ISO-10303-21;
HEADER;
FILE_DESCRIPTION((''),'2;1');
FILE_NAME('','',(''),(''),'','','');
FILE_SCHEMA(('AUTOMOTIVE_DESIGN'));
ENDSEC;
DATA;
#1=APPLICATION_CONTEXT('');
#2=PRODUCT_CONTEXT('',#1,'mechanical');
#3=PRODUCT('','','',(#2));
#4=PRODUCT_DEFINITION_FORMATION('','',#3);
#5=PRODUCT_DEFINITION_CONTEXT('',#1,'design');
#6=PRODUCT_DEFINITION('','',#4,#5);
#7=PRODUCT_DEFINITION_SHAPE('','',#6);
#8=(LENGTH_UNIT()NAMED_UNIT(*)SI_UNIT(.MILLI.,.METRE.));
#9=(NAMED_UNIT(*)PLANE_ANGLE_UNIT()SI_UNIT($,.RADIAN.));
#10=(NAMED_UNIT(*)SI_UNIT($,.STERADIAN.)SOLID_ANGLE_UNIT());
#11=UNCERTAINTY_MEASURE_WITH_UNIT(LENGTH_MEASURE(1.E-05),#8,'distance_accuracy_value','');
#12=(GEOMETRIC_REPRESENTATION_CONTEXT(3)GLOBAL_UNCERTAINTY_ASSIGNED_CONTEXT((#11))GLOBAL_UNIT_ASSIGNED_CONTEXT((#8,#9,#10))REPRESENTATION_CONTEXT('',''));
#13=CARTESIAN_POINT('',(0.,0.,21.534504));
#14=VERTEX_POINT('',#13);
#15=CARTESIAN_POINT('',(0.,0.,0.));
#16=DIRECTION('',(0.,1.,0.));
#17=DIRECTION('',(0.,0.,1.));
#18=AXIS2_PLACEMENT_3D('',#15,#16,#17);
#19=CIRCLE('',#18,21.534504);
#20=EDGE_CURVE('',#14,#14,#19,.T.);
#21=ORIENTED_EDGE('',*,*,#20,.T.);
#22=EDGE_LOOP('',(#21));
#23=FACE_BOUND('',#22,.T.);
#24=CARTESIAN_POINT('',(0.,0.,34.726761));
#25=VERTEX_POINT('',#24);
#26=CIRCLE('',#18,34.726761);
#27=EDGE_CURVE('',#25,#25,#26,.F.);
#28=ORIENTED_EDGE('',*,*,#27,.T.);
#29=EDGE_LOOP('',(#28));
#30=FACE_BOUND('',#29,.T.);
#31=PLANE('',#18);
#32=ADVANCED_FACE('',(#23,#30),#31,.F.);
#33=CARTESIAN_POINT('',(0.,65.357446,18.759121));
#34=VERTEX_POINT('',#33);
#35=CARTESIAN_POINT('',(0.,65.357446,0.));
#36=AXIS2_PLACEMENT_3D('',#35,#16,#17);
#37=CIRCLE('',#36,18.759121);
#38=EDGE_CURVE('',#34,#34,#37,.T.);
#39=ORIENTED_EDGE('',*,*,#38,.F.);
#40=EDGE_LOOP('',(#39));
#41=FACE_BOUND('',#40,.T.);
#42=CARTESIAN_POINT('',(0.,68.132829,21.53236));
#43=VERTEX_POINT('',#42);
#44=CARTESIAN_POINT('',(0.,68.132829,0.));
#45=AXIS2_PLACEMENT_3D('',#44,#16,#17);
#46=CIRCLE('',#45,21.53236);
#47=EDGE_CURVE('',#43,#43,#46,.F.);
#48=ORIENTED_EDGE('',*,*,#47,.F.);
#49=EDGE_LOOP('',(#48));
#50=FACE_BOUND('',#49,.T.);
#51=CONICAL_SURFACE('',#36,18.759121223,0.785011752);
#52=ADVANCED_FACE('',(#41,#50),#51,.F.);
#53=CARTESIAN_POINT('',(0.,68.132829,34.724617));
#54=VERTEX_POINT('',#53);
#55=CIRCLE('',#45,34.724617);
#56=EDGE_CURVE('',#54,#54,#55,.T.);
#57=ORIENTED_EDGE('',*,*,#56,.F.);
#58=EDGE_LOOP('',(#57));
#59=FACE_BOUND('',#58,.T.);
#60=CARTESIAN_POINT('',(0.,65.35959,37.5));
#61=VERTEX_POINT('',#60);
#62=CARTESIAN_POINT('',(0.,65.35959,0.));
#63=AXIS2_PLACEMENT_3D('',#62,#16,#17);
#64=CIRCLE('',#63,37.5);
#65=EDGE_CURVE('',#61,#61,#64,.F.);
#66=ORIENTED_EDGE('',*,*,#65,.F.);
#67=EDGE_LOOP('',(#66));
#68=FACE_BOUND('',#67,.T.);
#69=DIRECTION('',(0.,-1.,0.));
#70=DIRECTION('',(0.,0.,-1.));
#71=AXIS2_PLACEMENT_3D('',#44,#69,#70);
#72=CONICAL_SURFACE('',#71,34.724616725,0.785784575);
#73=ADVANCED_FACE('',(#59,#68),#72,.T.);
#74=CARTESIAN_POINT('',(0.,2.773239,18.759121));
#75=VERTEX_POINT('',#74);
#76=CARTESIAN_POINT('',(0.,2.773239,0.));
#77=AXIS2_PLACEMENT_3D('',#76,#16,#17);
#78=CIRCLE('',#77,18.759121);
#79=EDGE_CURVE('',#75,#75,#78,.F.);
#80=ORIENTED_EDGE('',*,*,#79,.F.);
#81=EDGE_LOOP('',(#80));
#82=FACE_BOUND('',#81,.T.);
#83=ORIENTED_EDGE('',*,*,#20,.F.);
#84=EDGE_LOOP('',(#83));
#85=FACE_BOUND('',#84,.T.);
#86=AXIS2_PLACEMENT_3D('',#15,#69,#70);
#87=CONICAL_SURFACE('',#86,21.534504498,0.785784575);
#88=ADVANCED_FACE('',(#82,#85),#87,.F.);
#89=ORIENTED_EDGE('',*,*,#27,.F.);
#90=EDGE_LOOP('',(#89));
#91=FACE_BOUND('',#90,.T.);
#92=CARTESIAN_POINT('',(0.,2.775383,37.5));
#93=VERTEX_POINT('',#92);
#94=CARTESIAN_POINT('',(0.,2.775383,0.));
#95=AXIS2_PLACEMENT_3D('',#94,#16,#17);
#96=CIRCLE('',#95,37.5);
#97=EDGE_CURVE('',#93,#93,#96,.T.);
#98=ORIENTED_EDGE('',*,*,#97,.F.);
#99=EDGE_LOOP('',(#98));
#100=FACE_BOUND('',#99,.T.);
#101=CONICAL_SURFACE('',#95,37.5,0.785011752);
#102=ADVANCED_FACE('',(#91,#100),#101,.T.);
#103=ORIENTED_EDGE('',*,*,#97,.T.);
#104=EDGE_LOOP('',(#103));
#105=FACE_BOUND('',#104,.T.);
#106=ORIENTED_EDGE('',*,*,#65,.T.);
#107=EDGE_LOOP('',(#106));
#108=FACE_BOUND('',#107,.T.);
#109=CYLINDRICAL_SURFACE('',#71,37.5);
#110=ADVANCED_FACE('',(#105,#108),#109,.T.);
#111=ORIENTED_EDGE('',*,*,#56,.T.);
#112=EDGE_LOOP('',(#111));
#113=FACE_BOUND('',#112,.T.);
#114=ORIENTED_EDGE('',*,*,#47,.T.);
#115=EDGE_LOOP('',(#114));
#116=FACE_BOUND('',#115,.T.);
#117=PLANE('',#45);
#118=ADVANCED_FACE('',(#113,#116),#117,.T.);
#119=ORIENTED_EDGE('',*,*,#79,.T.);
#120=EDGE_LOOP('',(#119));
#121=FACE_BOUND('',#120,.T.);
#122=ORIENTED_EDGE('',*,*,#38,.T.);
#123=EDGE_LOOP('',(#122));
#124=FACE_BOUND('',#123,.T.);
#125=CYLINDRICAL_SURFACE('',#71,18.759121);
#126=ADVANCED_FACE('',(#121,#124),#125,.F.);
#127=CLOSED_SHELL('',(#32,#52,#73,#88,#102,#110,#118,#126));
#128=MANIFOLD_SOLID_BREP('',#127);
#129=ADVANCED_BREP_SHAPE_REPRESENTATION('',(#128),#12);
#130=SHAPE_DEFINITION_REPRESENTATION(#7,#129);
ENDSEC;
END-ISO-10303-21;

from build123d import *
from OCP.BRepFilletAPI import BRepFilletAPI_MakeChamfer

# Parameters (mm, degrees)
SKETCH1_R           = 37.5
BOSS_EXTRUDE1_DEPTH = 68.132829337
SKETCH2_R           = 18.759121223
CUT_EXTRUDE1_DEPTH  = 87.339923752
CHAMFER1_SIZE       = 2.773239225
CHAMFER1_SIZE2      = 2.775383275


with BuildPart() as part:
    # Sketch1 → Boss-Extrude1 (new body)
    with BuildSketch(Plane(origin=(0, 0, 0), x_dir=(1, 0, 0), z_dir=(0, 1, 0))):
        Circle(SKETCH1_R)
    extrude(amount=BOSS_EXTRUDE1_DEPTH)

    # Sketch2 → Cut-Extrude1 (cut, through all)
    with BuildSketch(Plane(origin=(0, 0, 0), x_dir=(1, 0, 0), z_dir=(0, 1, 0))):
        Circle(SKETCH2_R)
    extrude(amount=CUT_EXTRUDE1_DEPTH, mode=Mode.SUBTRACT)

    # Chamfer1: one chamfer whose edges measure the first distance from different faces: ONE call of the kernel's chamfer builder (chamfer() names one face for all edges)
    chamfer1_edges_1 = [part.edges().sort_by_distance(p)[0] for p in [
        (-18.759121223, 68.132829337, 0),
    ]]
    chamfer1_side_1 = [part.faces().sort_by_distance(p)[0] for p in [
        (-36.439339828, 68.132829337, 0),
    ]]
    chamfer1_edges_2 = [part.edges().sort_by_distance(p)[0] for p in [
        (-18.759121223, 0, 0),
    ]]
    chamfer1_side_2 = [part.faces().sort_by_distance(p)[0] for p in [
        (-18.759121223, 34.066414668, 0),
    ]]
    chamfer1_edges_3 = [part.edges().sort_by_distance(p)[0] for p in [
        (-37.5, 0, 0),
    ]]
    chamfer1_side_3 = [part.faces().sort_by_distance(p)[0] for p in [
        (-36.439339828, 0, 0),
    ]]
    chamfer1_edges_4 = [part.edges().sort_by_distance(p)[0] for p in [
        (-37.5, 68.132829337, 0),
    ]]
    chamfer1_side_4 = [part.faces().sort_by_distance(p)[0] for p in [
        (-37.5, 34.066414668, 0),
    ]]
    chamfer1 = BRepFilletAPI_MakeChamfer(part.part.solid().wrapped)
    for e in chamfer1_edges_1:
        chamfer1.Add(CHAMFER1_SIZE, CHAMFER1_SIZE2, e.wrapped, chamfer1_side_1[0].wrapped)  # the first distance lies on this face
    for e in chamfer1_edges_2:
        chamfer1.Add(CHAMFER1_SIZE, CHAMFER1_SIZE2, e.wrapped, chamfer1_side_2[0].wrapped)  # the first distance lies on this face
    for e in chamfer1_edges_3:
        chamfer1.Add(CHAMFER1_SIZE, CHAMFER1_SIZE2, e.wrapped, chamfer1_side_3[0].wrapped)  # the first distance lies on this face
    for e in chamfer1_edges_4:
        chamfer1.Add(CHAMFER1_SIZE, CHAMFER1_SIZE2, e.wrapped, chamfer1_side_4[0].wrapped)  # the first distance lies on this face
    add(Compound.cast(chamfer1.Shape()), mode=Mode.REPLACE)


solid = part.part
